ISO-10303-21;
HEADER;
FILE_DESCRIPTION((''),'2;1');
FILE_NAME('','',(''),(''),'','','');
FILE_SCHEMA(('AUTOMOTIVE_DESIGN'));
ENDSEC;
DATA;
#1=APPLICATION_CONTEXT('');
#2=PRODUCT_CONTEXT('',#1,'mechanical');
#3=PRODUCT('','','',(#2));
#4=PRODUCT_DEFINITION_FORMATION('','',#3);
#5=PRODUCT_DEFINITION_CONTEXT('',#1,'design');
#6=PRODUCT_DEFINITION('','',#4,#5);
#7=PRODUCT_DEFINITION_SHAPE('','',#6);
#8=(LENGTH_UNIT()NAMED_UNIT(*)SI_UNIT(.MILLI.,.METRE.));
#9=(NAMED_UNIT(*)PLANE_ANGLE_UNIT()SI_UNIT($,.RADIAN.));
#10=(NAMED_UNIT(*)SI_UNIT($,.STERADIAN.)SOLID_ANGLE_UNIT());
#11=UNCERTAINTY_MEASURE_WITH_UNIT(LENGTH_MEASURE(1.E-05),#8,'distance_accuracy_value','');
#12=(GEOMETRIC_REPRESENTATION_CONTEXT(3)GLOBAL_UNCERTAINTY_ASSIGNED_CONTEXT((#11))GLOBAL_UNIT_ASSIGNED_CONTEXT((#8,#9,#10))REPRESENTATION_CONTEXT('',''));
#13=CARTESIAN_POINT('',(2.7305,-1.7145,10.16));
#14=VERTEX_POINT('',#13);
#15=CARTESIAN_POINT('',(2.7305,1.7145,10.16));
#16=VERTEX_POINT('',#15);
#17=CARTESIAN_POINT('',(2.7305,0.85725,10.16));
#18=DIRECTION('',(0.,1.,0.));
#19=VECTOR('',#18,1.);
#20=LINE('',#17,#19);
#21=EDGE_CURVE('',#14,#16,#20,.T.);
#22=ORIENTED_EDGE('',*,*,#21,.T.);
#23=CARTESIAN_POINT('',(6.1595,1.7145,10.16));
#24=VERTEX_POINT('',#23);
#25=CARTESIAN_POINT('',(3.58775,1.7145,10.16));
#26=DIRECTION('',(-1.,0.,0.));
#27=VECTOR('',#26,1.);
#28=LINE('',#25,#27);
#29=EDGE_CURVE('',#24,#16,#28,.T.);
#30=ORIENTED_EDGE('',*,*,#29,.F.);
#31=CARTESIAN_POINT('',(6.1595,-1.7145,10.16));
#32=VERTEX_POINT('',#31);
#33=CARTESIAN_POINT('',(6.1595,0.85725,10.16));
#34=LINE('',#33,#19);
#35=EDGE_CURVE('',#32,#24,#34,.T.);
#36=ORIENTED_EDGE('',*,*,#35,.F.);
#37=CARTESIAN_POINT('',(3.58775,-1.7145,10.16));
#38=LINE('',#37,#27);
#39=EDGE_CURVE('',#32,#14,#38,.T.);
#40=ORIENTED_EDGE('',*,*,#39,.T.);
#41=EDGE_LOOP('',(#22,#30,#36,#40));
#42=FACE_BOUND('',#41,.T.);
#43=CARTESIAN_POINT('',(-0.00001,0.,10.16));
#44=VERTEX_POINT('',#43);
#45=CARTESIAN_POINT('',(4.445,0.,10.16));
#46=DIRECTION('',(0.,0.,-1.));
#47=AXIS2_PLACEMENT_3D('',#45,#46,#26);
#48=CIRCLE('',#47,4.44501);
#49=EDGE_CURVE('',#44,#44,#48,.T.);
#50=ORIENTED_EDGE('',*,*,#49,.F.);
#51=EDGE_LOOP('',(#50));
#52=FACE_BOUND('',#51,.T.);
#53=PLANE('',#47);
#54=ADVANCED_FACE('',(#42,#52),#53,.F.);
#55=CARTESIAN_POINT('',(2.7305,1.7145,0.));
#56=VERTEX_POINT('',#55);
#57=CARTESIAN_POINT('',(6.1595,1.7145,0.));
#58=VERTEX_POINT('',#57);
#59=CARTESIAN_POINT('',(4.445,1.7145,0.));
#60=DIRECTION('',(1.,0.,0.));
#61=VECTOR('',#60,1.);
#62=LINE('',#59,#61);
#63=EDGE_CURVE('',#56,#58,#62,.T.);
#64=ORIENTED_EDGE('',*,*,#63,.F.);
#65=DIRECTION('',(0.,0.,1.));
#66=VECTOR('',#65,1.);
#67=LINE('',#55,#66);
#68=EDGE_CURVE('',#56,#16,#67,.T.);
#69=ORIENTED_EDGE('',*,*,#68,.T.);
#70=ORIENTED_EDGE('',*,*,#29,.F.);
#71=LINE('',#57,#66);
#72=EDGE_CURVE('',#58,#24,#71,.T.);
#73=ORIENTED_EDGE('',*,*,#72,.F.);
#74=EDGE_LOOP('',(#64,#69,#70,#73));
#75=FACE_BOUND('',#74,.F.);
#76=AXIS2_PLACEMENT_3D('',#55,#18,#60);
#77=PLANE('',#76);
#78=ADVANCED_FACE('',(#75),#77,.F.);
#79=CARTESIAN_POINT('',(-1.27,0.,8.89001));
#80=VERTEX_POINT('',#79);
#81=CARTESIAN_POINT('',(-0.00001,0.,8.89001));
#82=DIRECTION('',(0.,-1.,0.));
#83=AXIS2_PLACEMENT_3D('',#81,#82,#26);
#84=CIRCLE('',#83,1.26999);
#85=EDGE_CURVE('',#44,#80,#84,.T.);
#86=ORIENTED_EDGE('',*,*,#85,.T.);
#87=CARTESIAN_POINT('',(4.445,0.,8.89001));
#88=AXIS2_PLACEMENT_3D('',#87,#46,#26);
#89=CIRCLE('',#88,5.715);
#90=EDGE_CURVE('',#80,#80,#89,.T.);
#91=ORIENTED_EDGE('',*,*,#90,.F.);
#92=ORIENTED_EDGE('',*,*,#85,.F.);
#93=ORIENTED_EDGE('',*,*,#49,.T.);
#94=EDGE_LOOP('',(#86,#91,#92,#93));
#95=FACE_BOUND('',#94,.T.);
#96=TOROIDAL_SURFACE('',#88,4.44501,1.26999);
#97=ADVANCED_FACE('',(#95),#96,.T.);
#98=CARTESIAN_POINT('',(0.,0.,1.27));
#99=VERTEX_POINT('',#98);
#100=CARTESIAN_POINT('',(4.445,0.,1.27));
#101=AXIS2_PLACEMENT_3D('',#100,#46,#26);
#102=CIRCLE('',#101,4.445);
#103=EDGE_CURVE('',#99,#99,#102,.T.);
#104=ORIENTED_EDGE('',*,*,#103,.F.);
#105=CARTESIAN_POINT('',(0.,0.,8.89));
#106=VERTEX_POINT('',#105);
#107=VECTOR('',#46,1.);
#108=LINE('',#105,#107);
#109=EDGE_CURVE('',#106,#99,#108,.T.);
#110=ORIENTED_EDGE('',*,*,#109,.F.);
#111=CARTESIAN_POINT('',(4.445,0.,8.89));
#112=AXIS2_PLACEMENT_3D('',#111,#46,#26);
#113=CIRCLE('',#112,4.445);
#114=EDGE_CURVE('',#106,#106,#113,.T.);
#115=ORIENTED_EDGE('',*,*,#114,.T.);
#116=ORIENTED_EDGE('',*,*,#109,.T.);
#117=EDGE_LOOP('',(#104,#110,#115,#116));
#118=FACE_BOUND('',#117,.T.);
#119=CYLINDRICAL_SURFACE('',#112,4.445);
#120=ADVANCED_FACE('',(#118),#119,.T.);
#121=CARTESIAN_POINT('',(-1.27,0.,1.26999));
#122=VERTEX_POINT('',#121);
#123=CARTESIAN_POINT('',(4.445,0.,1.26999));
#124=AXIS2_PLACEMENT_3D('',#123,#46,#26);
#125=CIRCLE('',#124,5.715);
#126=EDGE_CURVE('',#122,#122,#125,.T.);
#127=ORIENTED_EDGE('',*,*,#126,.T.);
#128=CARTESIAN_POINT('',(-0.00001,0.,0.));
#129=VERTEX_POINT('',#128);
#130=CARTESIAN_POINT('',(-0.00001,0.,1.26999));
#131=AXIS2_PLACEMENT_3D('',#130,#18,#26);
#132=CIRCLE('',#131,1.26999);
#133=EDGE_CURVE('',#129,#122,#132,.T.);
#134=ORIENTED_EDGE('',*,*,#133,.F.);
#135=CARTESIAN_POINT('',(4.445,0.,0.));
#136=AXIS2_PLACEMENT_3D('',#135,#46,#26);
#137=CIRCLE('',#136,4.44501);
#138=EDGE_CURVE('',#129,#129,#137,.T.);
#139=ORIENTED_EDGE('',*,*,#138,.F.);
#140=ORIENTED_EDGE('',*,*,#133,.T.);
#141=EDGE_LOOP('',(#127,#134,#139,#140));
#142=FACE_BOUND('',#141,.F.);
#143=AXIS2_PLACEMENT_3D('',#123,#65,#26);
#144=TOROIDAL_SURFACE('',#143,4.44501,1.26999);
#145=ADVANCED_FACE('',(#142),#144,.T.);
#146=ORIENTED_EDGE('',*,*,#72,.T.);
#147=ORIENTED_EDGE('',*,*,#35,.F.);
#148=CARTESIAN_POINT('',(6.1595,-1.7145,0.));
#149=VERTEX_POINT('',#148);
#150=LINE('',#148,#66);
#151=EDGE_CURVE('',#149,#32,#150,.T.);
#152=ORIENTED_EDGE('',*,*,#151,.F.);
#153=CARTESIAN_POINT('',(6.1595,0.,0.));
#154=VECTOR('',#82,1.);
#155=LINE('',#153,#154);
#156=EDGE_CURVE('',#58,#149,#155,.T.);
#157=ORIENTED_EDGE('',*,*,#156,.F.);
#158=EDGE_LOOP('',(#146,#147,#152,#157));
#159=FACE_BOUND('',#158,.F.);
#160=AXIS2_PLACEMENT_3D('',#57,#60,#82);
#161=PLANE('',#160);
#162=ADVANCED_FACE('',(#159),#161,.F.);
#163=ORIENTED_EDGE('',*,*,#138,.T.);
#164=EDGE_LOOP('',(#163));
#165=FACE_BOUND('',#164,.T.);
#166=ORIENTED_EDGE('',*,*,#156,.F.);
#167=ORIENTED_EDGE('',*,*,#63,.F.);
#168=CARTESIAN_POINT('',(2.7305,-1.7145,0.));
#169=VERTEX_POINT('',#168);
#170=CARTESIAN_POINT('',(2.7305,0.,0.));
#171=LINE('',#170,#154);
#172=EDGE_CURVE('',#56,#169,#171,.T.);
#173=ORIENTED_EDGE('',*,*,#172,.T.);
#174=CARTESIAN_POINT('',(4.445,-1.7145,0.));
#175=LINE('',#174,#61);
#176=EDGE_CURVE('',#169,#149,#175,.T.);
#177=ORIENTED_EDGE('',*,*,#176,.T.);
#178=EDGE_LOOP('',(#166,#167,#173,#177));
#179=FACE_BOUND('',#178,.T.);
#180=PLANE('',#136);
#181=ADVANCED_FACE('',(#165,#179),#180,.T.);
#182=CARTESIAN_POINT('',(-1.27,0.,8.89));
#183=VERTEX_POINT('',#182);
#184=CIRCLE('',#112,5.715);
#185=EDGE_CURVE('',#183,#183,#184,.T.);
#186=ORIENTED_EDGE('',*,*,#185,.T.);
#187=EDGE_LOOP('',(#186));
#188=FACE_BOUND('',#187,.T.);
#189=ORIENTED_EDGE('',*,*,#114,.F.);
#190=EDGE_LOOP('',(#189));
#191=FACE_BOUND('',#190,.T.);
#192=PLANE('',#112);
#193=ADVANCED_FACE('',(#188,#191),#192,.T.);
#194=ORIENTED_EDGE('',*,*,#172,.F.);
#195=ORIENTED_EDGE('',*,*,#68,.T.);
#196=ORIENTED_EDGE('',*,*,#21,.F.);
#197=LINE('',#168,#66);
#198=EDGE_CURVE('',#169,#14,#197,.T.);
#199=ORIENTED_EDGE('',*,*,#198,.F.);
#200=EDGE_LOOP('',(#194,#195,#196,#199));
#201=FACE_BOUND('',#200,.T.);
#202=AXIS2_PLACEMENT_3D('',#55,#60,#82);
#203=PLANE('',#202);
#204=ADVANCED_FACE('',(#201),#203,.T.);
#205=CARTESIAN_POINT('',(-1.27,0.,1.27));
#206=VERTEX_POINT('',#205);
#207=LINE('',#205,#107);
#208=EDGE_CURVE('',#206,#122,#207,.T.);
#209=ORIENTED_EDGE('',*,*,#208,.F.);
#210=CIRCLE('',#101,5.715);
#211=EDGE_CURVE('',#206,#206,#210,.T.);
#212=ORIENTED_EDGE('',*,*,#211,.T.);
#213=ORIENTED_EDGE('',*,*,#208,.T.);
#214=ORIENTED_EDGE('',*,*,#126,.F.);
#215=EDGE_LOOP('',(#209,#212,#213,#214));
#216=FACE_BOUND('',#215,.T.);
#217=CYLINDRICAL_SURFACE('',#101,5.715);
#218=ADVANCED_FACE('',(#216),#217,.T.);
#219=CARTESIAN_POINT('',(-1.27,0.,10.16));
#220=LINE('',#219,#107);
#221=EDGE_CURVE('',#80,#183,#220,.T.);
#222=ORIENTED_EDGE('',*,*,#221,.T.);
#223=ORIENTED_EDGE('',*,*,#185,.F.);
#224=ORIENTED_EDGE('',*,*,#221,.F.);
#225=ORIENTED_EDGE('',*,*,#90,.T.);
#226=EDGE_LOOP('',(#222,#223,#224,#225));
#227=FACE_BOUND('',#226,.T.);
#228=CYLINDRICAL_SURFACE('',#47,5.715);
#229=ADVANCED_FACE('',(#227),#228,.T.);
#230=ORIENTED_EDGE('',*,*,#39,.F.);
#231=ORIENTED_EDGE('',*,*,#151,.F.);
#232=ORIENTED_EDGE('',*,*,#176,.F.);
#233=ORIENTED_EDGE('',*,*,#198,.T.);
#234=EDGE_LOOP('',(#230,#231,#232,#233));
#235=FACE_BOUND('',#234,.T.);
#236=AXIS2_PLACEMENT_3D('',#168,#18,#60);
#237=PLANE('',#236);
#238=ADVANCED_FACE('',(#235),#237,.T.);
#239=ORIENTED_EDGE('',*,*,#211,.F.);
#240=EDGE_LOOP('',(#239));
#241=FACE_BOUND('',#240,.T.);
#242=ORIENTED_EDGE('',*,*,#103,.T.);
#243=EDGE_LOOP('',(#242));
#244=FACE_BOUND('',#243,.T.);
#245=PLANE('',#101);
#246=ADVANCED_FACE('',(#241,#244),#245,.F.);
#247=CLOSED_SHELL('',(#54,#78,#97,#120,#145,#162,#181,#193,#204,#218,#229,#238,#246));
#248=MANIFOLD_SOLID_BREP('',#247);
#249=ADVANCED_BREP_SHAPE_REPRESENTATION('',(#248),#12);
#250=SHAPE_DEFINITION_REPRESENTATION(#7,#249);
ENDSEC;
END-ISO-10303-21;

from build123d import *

# Parameters (mm, degrees)
F2_W     = 3.429
F2_H     = 3.429
F3_DEPTH = 25.4
F4_R     = 1.26999
F5_R     = 1.26999


# Not quite as in the source:
# - a fillet or chamfer is up to 0.001 mm smaller than in the source, because OpenCascade refuses the exact size


with BuildPart() as f1:
    # F0 (on Front) → F1 (revolve)
    with BuildSketch(Plane.XZ):
        Polygon((-1.27, 0), (0, 0), (4.445, 0), (4.445, 10.16), (0, 10.16), (-1.27, 10.16), (-1.27, 8.89), (0, 8.89), (0, 1.27), (-1.27, 1.27), align=None)
    revolve(axis=Axis((4.445, 0, 5.08), (0, 0, -1)))

    # F2 (on face) → F3 (cut)
    with BuildSketch(Plane(origin=(0, 0, 0), x_dir=(1, 0, 0), z_dir=(0, 0, -1))):
        with Locations((4.445, 0)):
            Rectangle(F2_W, F2_H)
    extrude(amount=-F3_DEPTH, mode=Mode.SUBTRACT)

    # F4 (radius 1.27 in the source; OpenCascade refuses exactly that, so slightly less here)
    f4_edges = [f1.edges().sort_by_distance(p)[0] for p in [
        (10.16, 0, 0),
    ]]
    fillet(f4_edges, radius=F4_R)

    # F5 (radius 1.27 in the source; OpenCascade refuses exactly that, so slightly less here)
    f5_edges = [f1.edges().sort_by_distance(p)[0] for p in [
        (10.16, 0, 10.16),
    ]]
    fillet(f5_edges, radius=F5_R)


solid = f1.part
